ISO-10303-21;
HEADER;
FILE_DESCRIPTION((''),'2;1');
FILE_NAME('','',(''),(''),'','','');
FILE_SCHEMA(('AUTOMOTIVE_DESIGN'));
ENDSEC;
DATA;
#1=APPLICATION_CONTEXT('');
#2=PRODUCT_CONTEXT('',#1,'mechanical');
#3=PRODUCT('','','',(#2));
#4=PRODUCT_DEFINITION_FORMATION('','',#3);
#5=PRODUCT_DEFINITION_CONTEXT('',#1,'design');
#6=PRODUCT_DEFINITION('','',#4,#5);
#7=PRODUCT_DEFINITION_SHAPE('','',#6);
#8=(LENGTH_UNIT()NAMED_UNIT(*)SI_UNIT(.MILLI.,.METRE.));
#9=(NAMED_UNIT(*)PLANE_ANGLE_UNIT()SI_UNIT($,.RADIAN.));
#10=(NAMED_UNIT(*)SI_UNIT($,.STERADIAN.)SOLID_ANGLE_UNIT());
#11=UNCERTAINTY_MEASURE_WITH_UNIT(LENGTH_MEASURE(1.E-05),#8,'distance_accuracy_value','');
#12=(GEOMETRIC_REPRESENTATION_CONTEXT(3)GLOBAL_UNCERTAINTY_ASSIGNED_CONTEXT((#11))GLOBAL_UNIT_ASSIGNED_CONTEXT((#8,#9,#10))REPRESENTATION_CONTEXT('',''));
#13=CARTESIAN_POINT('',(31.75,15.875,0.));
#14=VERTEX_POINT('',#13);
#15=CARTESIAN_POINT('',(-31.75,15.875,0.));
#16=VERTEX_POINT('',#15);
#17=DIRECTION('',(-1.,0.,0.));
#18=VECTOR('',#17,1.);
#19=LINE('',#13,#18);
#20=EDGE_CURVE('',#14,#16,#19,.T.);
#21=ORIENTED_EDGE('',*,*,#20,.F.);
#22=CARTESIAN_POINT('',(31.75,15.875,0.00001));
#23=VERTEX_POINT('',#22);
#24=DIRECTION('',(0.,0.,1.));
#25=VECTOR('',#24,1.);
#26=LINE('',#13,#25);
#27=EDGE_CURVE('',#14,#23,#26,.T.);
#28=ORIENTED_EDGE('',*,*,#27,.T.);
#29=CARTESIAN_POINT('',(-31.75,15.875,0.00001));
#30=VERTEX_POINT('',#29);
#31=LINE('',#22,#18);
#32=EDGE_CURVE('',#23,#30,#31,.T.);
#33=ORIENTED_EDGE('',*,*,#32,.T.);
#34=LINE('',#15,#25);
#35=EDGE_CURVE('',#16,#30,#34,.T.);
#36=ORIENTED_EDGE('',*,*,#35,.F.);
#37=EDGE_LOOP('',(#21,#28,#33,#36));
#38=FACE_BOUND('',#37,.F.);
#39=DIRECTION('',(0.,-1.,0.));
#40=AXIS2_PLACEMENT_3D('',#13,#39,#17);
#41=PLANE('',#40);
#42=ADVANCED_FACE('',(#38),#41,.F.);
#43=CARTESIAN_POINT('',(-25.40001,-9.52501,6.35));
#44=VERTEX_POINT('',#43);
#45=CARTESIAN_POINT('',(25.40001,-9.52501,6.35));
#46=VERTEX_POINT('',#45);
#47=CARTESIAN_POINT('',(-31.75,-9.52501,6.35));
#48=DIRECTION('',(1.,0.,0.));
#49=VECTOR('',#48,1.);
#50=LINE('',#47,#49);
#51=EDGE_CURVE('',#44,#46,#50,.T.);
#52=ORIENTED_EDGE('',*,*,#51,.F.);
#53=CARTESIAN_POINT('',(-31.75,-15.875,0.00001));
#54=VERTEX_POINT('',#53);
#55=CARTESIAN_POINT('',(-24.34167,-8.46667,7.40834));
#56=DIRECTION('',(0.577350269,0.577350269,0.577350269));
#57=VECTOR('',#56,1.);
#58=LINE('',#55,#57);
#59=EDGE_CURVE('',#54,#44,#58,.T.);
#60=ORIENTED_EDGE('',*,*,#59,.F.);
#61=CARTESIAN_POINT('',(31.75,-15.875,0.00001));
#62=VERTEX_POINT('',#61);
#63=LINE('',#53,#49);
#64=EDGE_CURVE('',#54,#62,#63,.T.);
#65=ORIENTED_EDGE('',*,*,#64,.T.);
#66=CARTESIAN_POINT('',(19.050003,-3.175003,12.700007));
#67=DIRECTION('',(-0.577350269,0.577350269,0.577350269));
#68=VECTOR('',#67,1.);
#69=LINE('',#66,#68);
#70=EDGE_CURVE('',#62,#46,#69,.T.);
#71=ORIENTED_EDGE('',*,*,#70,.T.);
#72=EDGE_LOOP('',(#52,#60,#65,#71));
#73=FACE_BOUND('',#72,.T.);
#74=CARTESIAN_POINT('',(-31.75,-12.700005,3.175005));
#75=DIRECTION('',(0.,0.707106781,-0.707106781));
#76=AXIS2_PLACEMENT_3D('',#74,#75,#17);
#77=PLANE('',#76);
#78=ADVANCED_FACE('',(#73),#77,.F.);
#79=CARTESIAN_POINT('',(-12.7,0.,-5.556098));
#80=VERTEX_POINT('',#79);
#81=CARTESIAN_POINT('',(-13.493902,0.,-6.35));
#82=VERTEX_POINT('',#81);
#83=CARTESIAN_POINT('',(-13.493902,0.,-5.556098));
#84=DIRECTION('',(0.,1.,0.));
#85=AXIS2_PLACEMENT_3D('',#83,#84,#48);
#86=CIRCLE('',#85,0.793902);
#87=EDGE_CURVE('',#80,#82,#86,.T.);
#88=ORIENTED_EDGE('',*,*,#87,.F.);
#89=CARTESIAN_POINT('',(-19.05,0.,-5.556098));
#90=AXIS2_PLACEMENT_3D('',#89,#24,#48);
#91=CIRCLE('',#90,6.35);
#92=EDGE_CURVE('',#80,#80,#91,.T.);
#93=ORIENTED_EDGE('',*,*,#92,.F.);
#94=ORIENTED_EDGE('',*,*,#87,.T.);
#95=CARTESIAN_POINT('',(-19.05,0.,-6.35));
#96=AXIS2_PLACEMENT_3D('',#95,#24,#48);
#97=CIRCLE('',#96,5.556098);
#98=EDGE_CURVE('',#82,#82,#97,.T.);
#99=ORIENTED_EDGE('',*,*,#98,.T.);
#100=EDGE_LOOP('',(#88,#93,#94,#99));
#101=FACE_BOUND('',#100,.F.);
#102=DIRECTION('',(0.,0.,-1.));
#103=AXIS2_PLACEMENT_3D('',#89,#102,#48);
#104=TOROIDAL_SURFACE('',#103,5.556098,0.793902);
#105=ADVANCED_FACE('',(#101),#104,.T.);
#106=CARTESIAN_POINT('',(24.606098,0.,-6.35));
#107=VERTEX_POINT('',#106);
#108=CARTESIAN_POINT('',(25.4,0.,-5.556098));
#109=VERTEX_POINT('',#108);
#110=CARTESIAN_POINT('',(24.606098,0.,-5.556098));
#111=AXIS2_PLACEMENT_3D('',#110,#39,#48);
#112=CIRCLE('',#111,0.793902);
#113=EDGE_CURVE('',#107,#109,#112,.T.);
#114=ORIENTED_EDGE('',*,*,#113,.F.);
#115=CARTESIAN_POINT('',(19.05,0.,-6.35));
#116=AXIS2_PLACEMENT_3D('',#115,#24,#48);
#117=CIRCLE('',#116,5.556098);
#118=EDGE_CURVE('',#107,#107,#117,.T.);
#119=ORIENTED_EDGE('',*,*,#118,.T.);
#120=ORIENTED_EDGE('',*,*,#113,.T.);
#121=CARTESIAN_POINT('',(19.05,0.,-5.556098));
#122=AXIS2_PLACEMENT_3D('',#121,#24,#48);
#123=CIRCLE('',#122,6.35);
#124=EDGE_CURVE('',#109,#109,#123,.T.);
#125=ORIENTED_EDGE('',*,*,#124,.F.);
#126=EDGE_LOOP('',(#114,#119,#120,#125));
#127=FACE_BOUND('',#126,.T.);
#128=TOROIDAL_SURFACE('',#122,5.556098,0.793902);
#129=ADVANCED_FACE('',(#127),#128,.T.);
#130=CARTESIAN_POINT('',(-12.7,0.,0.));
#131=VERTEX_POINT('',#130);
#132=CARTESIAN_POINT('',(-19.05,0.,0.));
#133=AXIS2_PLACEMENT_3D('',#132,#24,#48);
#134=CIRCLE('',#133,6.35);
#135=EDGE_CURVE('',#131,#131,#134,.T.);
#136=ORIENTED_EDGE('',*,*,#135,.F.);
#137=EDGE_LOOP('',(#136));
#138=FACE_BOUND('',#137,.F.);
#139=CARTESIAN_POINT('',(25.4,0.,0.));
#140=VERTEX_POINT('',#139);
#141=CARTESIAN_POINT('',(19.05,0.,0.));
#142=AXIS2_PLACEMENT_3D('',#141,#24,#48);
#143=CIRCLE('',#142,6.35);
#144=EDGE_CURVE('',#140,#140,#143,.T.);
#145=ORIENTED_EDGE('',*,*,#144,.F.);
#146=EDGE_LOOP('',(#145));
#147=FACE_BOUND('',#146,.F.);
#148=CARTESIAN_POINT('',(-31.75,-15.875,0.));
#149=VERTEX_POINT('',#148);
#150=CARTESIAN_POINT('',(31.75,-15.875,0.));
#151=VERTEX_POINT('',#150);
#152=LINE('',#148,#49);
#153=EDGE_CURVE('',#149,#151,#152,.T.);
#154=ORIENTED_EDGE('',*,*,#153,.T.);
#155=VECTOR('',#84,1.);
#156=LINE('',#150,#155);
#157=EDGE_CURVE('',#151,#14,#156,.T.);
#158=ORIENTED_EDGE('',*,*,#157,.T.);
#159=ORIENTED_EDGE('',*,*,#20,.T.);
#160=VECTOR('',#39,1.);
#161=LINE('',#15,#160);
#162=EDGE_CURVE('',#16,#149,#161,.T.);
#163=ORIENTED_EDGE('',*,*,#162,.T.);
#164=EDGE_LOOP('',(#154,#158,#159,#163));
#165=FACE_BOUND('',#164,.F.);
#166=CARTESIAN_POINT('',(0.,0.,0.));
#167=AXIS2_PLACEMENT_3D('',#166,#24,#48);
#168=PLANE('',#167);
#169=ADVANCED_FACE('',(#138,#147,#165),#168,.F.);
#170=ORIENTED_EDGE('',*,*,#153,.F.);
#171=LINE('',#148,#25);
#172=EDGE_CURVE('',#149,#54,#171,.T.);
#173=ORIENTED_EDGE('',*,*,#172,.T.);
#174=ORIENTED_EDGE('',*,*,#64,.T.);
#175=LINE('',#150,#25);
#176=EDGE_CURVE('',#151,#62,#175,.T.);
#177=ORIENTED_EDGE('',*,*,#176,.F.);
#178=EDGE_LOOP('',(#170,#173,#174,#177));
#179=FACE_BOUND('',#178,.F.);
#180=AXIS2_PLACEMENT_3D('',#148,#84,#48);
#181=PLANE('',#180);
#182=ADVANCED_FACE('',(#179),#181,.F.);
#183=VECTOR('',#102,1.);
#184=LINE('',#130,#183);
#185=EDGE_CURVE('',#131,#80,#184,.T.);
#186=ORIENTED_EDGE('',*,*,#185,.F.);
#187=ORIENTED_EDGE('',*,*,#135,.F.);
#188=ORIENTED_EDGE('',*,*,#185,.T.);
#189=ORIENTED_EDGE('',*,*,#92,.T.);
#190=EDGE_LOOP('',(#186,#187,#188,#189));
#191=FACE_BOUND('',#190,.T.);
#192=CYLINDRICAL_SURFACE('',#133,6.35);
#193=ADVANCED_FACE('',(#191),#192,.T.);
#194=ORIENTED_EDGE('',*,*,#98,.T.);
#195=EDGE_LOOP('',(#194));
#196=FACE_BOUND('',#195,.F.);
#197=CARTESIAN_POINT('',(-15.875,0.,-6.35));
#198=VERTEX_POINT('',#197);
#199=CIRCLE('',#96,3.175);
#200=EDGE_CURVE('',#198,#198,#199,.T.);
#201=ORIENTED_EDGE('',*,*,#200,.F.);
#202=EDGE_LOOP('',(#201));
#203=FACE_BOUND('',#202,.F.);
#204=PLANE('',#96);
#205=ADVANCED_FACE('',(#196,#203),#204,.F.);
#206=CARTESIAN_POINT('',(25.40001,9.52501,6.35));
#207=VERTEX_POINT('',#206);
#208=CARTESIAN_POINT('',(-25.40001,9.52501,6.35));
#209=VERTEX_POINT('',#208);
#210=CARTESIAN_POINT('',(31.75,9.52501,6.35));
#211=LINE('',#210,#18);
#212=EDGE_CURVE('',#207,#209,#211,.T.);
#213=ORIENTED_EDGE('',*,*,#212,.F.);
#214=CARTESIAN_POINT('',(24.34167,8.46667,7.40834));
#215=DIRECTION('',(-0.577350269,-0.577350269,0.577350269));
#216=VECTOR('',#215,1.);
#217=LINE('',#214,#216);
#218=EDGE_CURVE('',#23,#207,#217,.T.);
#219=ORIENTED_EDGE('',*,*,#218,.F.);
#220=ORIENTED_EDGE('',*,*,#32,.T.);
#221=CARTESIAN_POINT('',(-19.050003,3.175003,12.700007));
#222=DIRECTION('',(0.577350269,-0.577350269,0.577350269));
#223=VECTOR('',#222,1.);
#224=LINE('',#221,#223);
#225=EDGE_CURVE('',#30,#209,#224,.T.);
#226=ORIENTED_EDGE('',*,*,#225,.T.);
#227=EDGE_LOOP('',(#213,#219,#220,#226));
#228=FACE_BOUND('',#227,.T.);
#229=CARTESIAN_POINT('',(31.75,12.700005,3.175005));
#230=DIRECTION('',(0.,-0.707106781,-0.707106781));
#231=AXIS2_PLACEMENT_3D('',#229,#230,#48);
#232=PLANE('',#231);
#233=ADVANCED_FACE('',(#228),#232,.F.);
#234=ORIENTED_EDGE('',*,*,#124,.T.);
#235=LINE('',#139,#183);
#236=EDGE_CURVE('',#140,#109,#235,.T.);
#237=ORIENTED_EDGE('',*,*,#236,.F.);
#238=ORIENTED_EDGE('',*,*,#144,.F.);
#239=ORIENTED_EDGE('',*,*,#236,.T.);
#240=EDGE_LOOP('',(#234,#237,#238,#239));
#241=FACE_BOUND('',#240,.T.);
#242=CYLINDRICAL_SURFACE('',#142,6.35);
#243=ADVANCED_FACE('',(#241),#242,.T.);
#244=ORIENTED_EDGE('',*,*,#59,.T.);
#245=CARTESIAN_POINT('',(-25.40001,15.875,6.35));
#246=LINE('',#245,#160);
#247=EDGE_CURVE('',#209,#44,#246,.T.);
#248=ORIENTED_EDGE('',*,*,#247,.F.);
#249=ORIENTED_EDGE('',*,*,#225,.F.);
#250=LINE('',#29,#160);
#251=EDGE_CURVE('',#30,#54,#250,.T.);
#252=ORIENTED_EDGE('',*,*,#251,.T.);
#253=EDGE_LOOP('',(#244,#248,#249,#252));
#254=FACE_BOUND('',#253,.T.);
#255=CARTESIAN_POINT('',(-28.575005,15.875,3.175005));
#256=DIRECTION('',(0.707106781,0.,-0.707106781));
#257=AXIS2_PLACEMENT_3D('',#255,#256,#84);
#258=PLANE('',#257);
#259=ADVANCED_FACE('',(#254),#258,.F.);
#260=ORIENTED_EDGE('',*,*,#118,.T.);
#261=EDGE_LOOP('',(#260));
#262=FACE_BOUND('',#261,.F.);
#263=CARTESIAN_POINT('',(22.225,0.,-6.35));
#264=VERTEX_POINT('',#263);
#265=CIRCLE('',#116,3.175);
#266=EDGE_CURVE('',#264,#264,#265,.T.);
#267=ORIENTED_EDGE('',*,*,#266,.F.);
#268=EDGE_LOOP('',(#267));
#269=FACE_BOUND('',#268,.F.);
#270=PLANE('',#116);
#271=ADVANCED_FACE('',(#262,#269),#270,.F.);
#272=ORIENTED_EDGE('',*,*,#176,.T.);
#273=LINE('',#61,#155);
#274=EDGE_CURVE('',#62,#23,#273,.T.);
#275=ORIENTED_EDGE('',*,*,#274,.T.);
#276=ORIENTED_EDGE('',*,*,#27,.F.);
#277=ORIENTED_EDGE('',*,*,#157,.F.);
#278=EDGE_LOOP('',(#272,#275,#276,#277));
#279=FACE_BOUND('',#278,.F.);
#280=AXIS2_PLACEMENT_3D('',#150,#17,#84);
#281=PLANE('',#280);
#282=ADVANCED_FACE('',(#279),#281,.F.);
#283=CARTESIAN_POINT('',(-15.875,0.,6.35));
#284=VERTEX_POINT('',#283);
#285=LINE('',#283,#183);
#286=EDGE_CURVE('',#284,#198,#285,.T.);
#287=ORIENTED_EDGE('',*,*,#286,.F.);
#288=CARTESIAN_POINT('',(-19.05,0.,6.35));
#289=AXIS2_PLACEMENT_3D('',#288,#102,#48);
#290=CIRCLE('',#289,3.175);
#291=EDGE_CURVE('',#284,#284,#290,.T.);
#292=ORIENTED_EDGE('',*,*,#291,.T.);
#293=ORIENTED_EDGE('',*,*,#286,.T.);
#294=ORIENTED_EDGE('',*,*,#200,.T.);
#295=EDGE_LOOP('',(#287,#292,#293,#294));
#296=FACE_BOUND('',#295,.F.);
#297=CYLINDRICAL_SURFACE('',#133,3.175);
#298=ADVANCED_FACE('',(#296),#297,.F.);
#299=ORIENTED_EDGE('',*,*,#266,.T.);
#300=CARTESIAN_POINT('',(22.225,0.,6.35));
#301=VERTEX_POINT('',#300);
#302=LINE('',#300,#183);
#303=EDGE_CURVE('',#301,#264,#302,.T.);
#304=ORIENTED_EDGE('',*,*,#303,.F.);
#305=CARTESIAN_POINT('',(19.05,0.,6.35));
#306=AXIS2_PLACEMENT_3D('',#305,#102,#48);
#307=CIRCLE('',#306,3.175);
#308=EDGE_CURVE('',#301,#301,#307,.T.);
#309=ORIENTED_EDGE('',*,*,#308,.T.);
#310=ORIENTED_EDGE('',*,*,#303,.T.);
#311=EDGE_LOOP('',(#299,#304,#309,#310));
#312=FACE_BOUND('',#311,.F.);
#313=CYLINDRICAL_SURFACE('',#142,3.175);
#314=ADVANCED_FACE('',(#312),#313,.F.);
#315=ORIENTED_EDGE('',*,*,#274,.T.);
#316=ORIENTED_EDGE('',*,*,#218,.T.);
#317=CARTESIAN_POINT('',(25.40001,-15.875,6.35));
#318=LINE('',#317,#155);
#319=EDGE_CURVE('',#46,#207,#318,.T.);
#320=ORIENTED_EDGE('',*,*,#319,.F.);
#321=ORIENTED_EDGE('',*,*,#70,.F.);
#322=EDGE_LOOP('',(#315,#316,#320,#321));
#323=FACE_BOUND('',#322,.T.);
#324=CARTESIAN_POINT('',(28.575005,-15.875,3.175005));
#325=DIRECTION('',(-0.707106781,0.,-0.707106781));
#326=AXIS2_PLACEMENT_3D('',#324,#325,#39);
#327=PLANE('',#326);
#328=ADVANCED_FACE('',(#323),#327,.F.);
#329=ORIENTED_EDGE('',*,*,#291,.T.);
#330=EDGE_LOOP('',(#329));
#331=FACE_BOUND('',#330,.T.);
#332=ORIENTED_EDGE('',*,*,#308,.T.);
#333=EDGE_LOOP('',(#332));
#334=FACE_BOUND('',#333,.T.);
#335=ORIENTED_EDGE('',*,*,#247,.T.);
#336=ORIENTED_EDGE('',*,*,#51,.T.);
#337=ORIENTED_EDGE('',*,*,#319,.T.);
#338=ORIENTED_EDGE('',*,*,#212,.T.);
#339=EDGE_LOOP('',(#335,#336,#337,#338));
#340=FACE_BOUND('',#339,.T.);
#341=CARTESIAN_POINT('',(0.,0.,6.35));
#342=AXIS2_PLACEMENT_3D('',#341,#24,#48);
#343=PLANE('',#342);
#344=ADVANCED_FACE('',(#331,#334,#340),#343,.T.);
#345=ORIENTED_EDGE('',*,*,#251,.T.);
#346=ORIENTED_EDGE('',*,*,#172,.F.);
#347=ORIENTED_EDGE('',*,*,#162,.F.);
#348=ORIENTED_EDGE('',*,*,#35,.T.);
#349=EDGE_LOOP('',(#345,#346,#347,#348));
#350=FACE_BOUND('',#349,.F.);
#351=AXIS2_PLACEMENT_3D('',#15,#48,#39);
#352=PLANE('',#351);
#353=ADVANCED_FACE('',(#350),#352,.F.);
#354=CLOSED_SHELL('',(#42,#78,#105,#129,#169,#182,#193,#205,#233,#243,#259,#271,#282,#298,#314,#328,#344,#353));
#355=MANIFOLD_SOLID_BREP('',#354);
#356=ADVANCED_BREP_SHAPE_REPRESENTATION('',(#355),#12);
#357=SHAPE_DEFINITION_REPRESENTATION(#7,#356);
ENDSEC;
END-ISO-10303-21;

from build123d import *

# Parameters (mm, degrees)
F0_R     = 6.35
F0_R_2   = 3.175
F1_DEPTH = 6.35
F2_SIZE  = 6.34999
F3_DEPTH = 6.351
F4_DEPTH = 6.35
F5_R     = 0.7939024


# Not quite as in the source:
# - a fillet or chamfer is up to 0.001 mm smaller than in the source, because OpenCascade refuses the exact size


with BuildPart() as f1:
    # F0 (on Top) → F1 (new body)
    with BuildSketch(Plane.XY):
        Polygon((-14.2875, 15.875), (-23.8125, 15.875), (-23.8125, 7.9375), (-31.75, 7.9375), (-31.75, -7.9375), (-23.8125, -7.9375), (-23.8125, -15.875), (-14.2875, -15.875), (-14.2875, -7.9375), (-6.35, -7.9375), (-6.35, -15.875), (6.35, -15.875), (6.35, -7.9375), (14.2875, -7.9375), (14.2875, -15.875), (23.8125, -15.875), (23.8125, -7.9375), (31.75, -7.9375), (31.75, 7.9375), (23.8125, 7.9375), (23.8125, 15.875), (14.2875, 15.875), (14.2875, 7.9375), (6.35, 7.9375), (6.35, 15.875), (-6.35, 15.875), (-6.35, 7.9375), (-14.2875, 7.9375), align=None)
        with Locations((-19.05, 0)):
            Circle(F0_R, mode=Mode.SUBTRACT)
        with Locations((19.05, 0)):
            Circle(F0_R, mode=Mode.SUBTRACT)
        with Locations((-19.05, 0)):
            Circle(F0_R)
        with Locations((-19.05, 0)):
            Circle(F0_R_2, mode=Mode.SUBTRACT)
        with Locations((19.05, 0)):
            Circle(F0_R)
        with Locations((19.05, 0)):
            Circle(F0_R_2, mode=Mode.SUBTRACT)
        with Locations((-19.05, 0)):
            Circle(F0_R_2)
        with Locations((19.05, 0)):
            Circle(F0_R_2)
        Polygon((-23.8125, 7.9375), (-31.75, 15.875), (-31.75, 7.9375), align=None)
        Polygon((-23.8125, 15.875), (-31.75, 15.875), (-23.8125, 7.9375), align=None)
        Polygon((-6.35, 15.875), (-14.2875, 15.875), (-14.2875, 7.9375), align=None)
        Polygon((-6.35, 7.9375), (-6.35, 15.875), (-14.2875, 7.9375), align=None)
        Polygon((14.2875, 7.9375), (6.35, 15.875), (6.35, 7.9375), align=None)
        Polygon((14.2875, 15.875), (6.35, 15.875), (14.2875, 7.9375), align=None)
        Polygon((31.75, 15.875), (23.8125, 15.875), (23.8125, 7.9375), align=None)
        Polygon((31.75, 7.9375), (31.75, 15.875), (23.8125, 7.9375), align=None)
        Polygon((31.75, -15.875), (31.75, -7.9375), (23.8125, -7.9375), align=None)
        Polygon((23.8125, -7.9375), (23.8125, -15.875), (31.75, -15.875), align=None)
        Polygon((14.2875, -7.9375), (6.35, -15.875), (14.2875, -15.875), align=None)
        Polygon((6.35, -7.9375), (6.35, -15.875), (14.2875, -7.9375), align=None)
        Polygon((-14.2875, -7.9375), (-6.35, -15.875), (-6.35, -7.9375), align=None)
        Polygon((-14.2875, -7.9375), (-14.2875, -15.875), (-6.35, -15.875), align=None)
        Polygon((-23.8125, -7.9375), (-31.75, -15.875), (-23.8125, -15.875), align=None)
        Polygon((-23.8125, -7.9375), (-31.75, -7.9375), (-31.75, -15.875), align=None)
    extrude(amount=F1_DEPTH)

    # F2 (size 6.35 in the source; OpenCascade refuses exactly that, so slightly less here)
    f2_edges = [f1.edges().sort_by_distance(p)[0] for p in [
        (31.75, 0, 6.35),
        (0, 15.875, 6.35),
        (-31.75, 0, 6.35),
        (0, -15.875, 6.35),
    ]]
    chamfer(f2_edges, length=F2_SIZE)

    # F0 (on Top) → F3 (cut, through all)
    with BuildSketch(Plane.XY):
        with Locations((-19.05, 0)):
            Circle(F0_R_2)
        with Locations((19.05, 0)):
            Circle(F0_R_2)
    extrude(amount=F3_DEPTH, mode=Mode.SUBTRACT)

    # F0 (on Top) → F4 (join)
    with BuildSketch(Plane.XY):
        with Locations((-19.05, 0)):
            Circle(F0_R)
        with Locations((-19.05, 0)):
            Circle(F0_R_2, mode=Mode.SUBTRACT)
        with Locations((19.05, 0)):
            Circle(F0_R)
        with Locations((19.05, 0)):
            Circle(F0_R_2, mode=Mode.SUBTRACT)
    extrude(amount=-F4_DEPTH)

    # F5
    f5_edges = [f1.edges().sort_by_distance(p)[0] for p in [
        (-25.4, 0, -6.35),
        (12.7, 0, -6.35),
    ]]
    fillet(f5_edges, radius=F5_R)


solid = f1.part
